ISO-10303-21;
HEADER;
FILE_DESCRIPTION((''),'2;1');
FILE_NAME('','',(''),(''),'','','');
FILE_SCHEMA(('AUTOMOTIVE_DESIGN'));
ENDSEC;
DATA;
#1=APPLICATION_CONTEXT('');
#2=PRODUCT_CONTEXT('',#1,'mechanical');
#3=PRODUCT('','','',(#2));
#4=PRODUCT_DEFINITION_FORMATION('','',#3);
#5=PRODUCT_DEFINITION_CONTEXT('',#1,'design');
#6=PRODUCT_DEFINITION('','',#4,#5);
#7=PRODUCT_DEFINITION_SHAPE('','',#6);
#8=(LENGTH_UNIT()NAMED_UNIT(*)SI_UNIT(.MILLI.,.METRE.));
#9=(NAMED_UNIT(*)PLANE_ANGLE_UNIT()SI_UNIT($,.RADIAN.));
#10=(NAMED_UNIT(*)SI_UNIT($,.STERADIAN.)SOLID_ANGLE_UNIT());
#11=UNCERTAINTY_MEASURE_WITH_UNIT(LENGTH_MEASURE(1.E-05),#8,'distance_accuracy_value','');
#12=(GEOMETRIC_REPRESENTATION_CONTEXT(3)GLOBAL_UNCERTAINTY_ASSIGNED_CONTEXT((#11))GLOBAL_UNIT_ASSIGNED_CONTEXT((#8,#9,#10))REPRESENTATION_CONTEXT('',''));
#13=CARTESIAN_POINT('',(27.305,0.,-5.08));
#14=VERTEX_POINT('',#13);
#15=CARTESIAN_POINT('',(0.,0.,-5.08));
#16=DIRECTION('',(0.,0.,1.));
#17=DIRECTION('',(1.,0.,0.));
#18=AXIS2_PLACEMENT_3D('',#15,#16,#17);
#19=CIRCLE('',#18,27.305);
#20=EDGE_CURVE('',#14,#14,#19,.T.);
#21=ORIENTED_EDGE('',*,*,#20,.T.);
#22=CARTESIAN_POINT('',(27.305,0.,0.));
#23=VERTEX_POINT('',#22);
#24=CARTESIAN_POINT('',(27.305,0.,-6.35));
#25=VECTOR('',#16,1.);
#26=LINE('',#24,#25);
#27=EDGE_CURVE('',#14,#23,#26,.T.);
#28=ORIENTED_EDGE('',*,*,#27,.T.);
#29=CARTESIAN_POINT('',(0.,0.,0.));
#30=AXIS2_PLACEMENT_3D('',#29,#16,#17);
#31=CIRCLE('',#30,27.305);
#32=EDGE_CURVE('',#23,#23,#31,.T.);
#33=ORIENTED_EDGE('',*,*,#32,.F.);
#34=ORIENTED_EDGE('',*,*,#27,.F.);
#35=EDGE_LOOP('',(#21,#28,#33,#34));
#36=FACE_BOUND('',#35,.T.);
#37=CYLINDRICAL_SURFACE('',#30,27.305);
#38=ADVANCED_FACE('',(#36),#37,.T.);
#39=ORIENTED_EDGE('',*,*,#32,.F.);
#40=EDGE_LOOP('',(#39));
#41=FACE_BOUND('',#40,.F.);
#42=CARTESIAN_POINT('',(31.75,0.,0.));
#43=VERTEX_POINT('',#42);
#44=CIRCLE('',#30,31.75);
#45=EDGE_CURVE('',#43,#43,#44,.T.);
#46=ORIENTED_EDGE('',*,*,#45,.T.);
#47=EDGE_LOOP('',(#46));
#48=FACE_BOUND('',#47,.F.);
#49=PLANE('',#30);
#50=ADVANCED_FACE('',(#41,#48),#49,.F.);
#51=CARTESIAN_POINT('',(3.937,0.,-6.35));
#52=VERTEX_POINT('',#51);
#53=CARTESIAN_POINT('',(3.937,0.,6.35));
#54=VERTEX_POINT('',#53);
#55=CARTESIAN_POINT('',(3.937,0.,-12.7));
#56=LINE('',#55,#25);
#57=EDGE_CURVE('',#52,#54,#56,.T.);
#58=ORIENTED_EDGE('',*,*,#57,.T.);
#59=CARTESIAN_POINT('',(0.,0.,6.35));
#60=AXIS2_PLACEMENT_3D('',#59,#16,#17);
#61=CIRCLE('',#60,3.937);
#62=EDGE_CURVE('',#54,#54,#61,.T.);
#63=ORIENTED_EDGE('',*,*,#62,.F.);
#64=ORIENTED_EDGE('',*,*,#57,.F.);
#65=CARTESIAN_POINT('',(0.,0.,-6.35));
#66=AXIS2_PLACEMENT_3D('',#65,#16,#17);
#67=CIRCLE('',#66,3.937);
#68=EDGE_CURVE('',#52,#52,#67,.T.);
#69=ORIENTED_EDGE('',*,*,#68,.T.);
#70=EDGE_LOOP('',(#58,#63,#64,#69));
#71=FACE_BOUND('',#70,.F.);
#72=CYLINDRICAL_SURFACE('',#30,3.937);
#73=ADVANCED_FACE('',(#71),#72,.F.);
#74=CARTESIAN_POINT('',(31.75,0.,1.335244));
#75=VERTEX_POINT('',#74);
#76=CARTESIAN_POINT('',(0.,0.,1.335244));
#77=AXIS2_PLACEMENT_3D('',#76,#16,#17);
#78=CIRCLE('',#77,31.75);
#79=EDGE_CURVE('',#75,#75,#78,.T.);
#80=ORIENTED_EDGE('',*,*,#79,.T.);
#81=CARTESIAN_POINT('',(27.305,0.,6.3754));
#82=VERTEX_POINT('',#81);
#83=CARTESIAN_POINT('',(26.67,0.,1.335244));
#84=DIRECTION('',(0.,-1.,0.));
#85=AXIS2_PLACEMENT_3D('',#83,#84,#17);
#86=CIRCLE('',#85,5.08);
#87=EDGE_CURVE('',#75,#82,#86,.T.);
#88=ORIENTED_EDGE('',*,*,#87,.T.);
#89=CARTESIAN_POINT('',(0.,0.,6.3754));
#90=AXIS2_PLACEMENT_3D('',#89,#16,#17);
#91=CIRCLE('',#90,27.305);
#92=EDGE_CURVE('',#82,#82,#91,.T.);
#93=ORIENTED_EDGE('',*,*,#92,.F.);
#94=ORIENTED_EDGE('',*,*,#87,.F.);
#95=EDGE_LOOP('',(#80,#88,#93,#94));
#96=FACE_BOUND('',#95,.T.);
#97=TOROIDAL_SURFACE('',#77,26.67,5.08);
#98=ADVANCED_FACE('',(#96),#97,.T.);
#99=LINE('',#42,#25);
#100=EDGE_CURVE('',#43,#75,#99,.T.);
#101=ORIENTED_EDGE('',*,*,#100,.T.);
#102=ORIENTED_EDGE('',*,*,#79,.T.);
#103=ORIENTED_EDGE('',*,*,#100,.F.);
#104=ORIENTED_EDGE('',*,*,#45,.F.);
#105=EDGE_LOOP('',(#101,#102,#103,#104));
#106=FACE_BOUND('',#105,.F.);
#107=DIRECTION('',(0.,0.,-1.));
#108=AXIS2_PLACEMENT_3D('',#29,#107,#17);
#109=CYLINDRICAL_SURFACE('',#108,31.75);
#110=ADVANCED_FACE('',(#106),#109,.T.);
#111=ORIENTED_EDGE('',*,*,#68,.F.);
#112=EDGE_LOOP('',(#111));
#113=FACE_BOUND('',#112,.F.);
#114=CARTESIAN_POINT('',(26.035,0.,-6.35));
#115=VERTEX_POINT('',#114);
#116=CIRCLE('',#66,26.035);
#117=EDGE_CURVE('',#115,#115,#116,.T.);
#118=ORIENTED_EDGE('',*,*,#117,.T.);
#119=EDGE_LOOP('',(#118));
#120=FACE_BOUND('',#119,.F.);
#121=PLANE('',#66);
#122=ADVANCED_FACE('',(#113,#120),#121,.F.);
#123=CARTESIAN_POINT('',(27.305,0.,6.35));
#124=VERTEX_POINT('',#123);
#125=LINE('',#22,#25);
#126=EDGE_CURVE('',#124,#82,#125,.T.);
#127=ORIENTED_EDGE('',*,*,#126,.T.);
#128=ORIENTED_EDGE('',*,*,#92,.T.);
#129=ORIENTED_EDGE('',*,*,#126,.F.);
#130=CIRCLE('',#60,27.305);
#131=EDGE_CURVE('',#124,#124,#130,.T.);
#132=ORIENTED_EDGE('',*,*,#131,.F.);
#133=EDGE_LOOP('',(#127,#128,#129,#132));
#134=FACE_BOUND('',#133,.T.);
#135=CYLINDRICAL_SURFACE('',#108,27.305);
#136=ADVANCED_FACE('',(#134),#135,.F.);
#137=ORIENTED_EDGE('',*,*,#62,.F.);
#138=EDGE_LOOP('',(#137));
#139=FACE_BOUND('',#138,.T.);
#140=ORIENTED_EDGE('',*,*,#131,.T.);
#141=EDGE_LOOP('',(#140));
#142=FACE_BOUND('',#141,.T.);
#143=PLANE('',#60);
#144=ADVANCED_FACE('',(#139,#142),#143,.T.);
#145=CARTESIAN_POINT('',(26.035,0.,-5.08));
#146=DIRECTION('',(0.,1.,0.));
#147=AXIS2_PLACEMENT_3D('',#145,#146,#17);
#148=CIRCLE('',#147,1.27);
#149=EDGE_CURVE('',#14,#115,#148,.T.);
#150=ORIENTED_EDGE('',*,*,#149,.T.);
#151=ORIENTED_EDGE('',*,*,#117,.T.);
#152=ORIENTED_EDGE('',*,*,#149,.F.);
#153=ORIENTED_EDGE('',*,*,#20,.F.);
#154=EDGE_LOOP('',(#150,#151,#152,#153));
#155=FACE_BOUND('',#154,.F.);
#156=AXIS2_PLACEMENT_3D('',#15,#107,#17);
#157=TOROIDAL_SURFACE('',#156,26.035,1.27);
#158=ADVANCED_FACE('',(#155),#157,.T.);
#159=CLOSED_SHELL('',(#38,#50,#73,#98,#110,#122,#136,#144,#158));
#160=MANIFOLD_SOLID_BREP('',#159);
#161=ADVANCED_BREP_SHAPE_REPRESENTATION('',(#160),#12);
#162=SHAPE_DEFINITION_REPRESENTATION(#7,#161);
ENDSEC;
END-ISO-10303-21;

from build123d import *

# Parameters (mm, degrees)
F0_R     = 27.305
F1_DEPTH = 6.35
F2_R     = 3.937
F3_DEPTH = 12.7
F0_R_2   = 31.75
F4_DEPTH = 6.3754
F5_R     = 1.27


# Not quite as in the source:
# - a fillet or chamfer that OpenCascade refuses, or shapes differently, is made with other operations: its cross-section is extruded or revolved along the edge and cut away or added


with BuildPart() as f1:
    # F0 (on Top) → F1 (new body, symmetric)
    with BuildSketch(Plane.XY):
        Circle(F0_R)
    extrude(amount=F1_DEPTH, both=True)

    # F2 (on Top) → F3 (cut, symmetric)
    with BuildSketch(Plane.XY):
        Circle(F2_R)
    extrude(amount=F3_DEPTH, both=True, mode=Mode.SUBTRACT)

    # F0 (on Top) → F4 (join)
    with BuildSketch(Plane.XY):
        Circle(F0_R_2)
        Circle(F0_R, mode=Mode.SUBTRACT)
    extrude(amount=F4_DEPTH)

    # F5
    f5_edges = [f1.edges().sort_by_distance(p)[0] for p in [
        (-27.305, 0, -6.35),
    ]]
    fillet(f5_edges, radius=F5_R)

    # F6: fillet of radius 5.08 on 1 edges, made by hand

    # F6_s1 → F6_t2 (revolve, cut)
    with BuildSketch(Plane.XZ):
        with BuildLine():
            ThreePointArc((31.75, 1.3352437524), (30.48, 4.6953479175), (27.305, 6.3754))
            Line((27.305, 6.3754), (31.75, 6.3754))
            Line((31.75, 6.3754), (31.75, 1.3352437524))
        make_face()
    revolve(axis=Axis((0, 0, 6.3754), (0, 0, 1)), mode=Mode.SUBTRACT)


solid = f1.part
